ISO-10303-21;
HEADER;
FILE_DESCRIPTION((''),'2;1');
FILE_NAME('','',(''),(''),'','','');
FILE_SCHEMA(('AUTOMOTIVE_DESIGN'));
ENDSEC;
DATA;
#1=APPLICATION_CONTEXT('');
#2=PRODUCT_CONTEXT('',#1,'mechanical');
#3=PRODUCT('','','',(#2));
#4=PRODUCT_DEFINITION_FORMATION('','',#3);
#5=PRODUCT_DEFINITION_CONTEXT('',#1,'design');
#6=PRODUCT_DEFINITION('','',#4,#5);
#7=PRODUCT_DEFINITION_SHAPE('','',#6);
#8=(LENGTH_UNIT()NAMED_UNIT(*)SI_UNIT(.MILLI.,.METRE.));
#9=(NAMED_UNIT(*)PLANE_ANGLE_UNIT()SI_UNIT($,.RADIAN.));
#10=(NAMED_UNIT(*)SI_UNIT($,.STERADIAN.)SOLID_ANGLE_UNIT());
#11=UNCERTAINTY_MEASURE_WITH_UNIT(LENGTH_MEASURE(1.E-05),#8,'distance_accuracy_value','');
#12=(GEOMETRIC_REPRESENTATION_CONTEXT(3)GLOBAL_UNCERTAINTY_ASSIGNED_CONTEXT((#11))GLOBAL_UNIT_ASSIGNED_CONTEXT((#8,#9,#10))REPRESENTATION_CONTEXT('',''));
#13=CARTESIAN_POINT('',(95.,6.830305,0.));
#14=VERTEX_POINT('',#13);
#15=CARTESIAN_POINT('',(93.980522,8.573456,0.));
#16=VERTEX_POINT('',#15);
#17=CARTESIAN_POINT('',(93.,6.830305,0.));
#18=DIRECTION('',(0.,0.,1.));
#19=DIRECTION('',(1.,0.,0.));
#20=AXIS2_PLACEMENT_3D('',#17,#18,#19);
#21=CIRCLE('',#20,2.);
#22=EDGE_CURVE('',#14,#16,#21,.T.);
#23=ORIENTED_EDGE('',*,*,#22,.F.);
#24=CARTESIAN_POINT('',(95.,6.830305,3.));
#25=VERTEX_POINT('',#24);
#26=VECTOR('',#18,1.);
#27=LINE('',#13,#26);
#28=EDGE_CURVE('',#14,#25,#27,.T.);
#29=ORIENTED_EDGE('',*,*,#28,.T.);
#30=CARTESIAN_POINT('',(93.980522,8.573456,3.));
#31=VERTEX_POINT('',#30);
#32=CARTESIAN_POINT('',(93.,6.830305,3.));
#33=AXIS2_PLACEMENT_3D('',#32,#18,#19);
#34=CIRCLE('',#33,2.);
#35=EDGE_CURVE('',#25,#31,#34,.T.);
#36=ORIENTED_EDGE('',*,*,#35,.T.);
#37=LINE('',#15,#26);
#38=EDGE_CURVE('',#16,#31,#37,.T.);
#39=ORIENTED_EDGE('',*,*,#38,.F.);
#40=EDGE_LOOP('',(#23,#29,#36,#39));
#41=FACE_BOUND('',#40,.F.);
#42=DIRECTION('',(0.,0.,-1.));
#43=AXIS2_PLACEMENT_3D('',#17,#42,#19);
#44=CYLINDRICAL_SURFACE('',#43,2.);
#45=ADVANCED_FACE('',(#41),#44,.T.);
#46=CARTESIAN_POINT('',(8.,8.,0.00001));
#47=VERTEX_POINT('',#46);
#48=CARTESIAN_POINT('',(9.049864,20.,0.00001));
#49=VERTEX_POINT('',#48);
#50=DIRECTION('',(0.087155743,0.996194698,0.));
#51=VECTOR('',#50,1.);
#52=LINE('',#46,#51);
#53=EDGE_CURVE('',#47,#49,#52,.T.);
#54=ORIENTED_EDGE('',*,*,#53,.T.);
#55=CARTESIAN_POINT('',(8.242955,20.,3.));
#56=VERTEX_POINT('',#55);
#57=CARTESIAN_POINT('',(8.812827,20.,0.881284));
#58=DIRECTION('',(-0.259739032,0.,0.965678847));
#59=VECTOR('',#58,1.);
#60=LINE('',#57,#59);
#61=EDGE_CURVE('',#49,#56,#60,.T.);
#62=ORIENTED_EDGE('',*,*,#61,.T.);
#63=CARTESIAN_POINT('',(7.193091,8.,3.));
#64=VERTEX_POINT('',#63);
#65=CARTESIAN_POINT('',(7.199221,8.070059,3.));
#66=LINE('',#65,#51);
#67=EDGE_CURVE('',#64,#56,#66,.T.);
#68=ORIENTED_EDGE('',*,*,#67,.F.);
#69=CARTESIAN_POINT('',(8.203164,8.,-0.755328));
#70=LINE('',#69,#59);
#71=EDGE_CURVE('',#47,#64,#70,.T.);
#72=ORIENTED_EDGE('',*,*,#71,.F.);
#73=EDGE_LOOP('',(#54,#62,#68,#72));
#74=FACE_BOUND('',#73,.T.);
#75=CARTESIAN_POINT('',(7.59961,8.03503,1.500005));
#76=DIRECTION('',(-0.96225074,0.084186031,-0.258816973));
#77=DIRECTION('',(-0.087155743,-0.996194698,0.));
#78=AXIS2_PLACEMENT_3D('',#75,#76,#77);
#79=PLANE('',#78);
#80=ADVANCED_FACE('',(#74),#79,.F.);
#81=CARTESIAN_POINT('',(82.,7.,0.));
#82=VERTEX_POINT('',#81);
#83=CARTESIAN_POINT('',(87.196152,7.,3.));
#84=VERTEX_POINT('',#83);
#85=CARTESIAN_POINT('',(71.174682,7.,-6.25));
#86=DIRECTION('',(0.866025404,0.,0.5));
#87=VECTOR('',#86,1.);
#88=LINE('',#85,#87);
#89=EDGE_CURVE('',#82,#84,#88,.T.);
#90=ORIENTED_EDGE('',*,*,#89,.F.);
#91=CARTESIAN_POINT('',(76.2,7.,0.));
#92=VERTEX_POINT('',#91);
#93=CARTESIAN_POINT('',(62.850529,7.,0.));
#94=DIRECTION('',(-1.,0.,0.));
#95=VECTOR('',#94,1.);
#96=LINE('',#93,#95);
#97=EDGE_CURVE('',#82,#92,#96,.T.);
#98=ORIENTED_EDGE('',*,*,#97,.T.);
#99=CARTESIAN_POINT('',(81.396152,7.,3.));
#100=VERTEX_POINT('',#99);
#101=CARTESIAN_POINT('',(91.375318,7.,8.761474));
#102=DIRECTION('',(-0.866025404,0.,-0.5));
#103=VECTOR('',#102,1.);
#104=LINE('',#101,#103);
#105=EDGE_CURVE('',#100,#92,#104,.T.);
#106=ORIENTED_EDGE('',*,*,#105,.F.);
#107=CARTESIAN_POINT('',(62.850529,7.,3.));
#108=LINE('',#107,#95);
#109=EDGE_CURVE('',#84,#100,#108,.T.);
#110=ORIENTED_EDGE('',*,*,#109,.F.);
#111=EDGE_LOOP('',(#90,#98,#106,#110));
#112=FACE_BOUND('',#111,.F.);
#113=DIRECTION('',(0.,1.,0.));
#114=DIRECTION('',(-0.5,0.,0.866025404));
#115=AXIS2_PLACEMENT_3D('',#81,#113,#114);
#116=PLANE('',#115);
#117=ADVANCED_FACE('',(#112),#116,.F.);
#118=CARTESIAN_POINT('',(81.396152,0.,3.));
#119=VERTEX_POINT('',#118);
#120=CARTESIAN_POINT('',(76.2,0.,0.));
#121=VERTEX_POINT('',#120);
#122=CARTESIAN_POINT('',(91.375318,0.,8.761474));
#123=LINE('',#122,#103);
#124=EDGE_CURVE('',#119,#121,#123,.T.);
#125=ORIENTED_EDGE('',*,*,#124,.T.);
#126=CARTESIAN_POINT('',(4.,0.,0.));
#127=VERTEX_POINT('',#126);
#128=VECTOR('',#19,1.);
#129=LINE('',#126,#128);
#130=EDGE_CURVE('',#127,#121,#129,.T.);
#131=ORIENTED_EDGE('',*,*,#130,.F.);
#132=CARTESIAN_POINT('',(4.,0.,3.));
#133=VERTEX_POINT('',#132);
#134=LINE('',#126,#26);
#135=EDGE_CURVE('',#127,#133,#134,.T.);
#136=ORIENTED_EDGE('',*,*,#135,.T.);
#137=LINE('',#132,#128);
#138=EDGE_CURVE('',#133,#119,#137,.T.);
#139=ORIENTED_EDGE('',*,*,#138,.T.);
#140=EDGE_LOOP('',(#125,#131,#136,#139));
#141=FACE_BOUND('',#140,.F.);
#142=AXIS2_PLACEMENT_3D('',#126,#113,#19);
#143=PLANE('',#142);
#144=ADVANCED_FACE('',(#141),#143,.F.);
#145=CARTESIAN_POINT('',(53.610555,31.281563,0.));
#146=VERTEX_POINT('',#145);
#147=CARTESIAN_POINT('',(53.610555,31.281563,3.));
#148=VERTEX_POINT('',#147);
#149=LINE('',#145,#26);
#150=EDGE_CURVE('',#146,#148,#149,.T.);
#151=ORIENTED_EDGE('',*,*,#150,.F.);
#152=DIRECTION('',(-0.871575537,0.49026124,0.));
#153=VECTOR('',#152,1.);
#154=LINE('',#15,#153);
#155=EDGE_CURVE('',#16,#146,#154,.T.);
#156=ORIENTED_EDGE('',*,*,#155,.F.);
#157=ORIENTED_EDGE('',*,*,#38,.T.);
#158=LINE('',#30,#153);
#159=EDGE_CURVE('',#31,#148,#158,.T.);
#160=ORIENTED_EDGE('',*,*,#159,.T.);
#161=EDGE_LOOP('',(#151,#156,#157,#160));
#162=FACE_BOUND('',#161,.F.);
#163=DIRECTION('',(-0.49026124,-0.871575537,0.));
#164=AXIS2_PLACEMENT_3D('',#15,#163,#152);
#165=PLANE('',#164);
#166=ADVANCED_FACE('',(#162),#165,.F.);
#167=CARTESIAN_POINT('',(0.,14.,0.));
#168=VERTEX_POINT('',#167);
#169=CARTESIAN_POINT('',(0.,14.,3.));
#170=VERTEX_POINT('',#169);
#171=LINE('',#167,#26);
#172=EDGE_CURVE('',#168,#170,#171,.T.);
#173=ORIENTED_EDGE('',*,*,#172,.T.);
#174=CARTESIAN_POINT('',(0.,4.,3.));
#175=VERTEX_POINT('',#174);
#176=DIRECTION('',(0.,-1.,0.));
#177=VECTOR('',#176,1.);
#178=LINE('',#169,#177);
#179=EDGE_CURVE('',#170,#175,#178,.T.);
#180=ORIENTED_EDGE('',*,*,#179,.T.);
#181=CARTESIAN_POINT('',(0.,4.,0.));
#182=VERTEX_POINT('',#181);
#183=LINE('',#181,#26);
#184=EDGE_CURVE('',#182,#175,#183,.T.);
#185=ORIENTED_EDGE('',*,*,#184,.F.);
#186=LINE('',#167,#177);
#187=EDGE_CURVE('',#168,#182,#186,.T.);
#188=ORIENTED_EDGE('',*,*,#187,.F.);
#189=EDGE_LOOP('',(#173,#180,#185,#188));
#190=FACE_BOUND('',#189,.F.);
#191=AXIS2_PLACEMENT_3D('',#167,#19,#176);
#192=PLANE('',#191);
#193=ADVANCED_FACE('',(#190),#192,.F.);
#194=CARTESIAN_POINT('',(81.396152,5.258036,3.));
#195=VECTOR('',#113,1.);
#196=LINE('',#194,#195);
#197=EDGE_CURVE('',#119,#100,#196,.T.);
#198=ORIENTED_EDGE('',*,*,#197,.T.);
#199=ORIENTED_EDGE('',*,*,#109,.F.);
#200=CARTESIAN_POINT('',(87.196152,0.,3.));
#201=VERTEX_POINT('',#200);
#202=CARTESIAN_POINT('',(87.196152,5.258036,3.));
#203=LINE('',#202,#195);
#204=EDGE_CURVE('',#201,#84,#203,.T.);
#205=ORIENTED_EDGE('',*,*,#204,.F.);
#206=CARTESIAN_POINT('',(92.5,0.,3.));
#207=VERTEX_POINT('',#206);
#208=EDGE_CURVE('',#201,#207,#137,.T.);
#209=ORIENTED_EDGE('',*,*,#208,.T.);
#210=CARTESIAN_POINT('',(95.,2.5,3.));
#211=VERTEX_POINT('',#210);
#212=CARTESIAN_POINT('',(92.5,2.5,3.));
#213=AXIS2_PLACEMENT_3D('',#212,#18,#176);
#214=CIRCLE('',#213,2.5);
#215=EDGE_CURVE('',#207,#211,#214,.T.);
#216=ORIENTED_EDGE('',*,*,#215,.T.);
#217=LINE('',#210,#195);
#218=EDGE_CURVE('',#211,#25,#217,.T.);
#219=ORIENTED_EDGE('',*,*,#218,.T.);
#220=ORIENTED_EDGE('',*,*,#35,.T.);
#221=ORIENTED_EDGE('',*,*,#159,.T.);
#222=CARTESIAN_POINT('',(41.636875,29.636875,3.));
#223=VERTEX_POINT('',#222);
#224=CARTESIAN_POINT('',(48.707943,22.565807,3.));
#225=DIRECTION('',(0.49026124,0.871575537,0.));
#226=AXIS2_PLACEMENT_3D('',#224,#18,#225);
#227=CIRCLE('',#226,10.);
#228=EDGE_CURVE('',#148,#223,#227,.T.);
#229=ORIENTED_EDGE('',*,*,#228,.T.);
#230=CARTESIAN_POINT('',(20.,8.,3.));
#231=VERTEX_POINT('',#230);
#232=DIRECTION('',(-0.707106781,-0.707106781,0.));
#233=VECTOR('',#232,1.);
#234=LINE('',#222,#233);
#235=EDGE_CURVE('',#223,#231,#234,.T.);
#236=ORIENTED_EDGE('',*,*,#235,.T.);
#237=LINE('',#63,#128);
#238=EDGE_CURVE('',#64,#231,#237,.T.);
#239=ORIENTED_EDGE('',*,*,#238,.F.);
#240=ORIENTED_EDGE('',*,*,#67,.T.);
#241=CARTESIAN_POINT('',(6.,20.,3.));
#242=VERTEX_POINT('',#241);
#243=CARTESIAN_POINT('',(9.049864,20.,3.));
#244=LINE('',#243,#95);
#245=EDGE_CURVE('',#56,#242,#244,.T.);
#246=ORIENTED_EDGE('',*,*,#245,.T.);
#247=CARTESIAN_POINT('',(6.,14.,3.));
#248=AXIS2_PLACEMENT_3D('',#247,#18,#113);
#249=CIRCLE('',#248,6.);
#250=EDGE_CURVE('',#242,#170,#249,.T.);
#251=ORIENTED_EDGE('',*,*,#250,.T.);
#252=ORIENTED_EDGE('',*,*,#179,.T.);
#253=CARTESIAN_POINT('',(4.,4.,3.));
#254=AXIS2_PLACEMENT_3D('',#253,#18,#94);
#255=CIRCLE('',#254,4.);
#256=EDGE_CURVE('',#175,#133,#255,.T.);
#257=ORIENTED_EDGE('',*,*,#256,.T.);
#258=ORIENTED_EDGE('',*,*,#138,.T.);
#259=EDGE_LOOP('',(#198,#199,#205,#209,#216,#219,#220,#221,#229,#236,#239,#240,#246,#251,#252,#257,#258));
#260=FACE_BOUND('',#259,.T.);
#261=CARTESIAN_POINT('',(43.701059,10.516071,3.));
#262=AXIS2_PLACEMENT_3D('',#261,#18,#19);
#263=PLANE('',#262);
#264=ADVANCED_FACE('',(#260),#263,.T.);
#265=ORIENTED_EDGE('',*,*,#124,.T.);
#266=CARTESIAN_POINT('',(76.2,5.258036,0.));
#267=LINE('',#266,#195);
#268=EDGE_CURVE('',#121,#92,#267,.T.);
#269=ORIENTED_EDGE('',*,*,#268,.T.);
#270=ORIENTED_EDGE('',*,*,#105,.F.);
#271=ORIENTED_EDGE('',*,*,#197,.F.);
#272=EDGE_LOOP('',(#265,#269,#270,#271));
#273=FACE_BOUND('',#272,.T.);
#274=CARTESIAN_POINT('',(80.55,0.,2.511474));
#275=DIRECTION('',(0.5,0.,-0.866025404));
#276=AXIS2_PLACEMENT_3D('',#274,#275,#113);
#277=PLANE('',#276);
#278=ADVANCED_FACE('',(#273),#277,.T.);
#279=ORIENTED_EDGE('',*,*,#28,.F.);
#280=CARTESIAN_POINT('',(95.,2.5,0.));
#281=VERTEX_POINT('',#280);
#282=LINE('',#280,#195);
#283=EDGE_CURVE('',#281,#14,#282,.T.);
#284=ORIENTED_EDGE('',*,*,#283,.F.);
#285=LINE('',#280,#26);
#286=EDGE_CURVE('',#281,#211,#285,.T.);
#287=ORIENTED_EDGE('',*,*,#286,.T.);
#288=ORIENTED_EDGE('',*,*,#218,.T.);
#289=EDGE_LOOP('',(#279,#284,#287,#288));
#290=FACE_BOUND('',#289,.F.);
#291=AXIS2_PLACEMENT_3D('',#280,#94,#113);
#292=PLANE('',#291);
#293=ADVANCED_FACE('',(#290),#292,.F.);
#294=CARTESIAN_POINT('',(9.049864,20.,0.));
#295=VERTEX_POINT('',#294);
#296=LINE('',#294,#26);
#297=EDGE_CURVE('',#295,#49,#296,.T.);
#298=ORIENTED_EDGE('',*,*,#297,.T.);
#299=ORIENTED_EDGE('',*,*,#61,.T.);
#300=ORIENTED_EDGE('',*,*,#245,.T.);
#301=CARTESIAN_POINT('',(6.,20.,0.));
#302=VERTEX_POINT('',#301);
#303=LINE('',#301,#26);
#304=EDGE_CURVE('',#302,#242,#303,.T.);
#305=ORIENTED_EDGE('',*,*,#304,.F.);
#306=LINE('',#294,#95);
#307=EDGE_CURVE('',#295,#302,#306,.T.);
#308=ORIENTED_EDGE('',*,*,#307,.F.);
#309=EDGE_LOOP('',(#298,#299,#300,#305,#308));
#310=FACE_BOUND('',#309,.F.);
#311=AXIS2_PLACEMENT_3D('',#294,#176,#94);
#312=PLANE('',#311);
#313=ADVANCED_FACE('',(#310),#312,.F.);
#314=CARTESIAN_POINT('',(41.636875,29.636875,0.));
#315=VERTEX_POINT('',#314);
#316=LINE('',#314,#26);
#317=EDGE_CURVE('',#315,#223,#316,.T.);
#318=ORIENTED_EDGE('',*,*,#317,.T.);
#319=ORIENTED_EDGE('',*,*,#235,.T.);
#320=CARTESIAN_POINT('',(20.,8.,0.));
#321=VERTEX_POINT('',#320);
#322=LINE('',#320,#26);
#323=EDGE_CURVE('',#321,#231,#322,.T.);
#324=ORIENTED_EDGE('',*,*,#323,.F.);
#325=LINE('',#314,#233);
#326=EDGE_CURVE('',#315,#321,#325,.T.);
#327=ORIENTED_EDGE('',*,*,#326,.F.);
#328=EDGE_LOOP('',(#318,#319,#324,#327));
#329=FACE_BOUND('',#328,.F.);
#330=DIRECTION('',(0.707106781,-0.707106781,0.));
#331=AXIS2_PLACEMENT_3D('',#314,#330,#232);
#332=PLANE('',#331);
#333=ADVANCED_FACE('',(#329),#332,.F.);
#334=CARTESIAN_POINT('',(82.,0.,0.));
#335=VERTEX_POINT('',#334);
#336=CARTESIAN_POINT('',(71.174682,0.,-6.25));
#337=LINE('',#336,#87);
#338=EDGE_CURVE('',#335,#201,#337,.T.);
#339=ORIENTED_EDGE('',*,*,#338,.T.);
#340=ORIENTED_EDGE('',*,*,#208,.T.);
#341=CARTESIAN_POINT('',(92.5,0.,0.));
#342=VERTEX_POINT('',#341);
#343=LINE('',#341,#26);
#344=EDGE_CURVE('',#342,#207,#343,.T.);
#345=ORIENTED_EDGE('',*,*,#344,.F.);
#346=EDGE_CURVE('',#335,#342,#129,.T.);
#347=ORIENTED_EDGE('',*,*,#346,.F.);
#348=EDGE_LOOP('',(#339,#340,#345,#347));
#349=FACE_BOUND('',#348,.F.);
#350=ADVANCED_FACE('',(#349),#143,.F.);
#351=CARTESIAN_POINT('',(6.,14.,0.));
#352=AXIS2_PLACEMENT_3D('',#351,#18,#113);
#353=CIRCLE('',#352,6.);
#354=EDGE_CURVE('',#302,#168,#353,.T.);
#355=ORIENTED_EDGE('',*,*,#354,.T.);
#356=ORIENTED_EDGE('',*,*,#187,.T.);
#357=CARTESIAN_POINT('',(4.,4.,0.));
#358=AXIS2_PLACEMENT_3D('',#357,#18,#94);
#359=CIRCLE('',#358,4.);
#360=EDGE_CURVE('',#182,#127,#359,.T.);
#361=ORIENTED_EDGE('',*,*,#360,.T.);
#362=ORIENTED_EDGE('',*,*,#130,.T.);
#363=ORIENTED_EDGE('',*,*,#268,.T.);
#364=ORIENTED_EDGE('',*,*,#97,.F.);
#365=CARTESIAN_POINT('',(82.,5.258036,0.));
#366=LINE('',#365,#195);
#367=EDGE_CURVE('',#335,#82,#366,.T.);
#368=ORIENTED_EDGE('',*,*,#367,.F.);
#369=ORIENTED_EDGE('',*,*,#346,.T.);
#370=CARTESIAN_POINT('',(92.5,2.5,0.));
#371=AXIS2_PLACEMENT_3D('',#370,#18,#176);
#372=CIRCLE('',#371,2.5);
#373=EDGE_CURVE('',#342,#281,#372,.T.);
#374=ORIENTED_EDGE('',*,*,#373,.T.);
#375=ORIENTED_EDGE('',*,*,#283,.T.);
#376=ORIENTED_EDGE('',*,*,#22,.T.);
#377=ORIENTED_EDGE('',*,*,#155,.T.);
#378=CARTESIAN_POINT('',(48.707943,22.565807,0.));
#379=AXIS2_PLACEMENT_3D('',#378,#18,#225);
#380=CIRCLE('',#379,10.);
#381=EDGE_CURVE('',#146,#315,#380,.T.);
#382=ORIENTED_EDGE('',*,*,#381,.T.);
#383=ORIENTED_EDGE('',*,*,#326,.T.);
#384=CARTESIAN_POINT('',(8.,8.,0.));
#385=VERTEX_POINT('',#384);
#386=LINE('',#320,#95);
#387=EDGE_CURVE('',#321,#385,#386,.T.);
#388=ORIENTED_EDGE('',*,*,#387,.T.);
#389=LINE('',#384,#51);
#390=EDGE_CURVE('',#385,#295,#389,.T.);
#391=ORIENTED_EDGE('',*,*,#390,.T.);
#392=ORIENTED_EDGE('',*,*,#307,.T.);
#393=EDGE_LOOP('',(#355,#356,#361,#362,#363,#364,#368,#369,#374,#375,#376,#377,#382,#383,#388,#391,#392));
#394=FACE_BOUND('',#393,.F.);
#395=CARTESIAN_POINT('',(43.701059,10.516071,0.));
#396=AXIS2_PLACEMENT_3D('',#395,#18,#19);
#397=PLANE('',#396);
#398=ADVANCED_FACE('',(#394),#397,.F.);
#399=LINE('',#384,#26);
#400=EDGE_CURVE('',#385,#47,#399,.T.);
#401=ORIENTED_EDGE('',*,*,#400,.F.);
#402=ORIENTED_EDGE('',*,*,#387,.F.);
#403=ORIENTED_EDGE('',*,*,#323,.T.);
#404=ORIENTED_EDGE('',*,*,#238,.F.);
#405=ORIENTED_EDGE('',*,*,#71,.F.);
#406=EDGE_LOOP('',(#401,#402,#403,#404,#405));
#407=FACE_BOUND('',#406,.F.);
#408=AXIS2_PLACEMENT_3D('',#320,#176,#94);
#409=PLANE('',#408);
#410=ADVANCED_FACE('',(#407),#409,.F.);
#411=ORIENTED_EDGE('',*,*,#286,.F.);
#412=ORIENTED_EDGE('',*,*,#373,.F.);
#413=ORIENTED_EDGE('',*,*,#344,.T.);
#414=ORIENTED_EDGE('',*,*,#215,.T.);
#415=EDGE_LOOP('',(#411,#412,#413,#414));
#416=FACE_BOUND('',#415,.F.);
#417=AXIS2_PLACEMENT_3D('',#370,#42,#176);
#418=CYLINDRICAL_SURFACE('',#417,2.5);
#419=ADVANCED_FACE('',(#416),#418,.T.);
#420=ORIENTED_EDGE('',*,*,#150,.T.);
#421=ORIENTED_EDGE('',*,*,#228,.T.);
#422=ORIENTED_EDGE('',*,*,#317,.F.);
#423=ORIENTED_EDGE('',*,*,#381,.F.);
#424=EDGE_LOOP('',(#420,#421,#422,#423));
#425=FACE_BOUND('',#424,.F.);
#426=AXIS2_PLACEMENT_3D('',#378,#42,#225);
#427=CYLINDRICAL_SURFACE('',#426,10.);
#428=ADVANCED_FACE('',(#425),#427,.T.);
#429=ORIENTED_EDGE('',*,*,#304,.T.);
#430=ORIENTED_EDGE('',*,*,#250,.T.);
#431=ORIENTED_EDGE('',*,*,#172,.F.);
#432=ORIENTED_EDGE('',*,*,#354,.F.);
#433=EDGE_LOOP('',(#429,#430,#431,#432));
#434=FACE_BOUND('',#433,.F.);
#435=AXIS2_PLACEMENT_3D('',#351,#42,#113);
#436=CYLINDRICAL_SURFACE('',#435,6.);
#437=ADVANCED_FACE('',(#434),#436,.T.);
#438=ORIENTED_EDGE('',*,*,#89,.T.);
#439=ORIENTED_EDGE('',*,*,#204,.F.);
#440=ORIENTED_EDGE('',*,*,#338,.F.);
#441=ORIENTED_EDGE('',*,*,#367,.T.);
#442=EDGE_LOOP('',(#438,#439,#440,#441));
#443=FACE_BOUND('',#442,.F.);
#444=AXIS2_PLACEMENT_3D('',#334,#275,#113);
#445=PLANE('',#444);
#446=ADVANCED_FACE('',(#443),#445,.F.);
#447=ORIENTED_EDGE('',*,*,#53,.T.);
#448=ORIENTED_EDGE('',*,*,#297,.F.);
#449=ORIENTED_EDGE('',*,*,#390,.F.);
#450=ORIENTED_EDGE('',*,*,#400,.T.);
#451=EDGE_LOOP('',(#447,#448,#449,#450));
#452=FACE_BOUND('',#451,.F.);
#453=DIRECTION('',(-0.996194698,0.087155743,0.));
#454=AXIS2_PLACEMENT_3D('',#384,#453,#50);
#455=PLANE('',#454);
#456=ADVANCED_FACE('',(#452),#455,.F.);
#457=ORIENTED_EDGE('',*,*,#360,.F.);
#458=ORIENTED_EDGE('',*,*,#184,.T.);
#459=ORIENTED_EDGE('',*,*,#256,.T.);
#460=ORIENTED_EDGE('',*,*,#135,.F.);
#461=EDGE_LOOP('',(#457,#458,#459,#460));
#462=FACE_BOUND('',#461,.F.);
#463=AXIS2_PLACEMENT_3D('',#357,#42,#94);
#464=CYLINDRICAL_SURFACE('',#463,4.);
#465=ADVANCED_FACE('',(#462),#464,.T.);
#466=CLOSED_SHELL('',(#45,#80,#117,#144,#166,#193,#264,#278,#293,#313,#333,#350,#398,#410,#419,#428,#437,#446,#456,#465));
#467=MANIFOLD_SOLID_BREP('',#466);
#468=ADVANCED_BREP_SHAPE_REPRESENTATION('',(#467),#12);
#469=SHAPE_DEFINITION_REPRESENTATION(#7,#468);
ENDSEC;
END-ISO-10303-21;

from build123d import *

# Parameters (mm, degrees)
F1_DEPTH = 3
F5_SIZE2 = 0.803838
F5_SIZE  = 2.99999
F4_W     = 7
F4_H     = 2.9
F6_DEPTH = 12.5


# Not quite as in the source:
# - a fillet or chamfer is up to 0.001 mm smaller than in the source, because OpenCascade refuses the exact size


with BuildPart() as f1:
    # F0 (on Top) → F1 (new body)
    with BuildSketch(Plane.XY):
        with BuildLine():
            Line((4, 0), (92.5, 0))
            ThreePointArc((92.5, 0), (94.267766953, 0.732233047), (95, 2.5))
            Line((95, 2.5), (95, 6.8303050312))
            ThreePointArc((95, 6.8303050312), (94.7264189756, 7.8399968261), (93.9805224793, 8.5734561054))
            Line((93.9805224793, 8.5734561054), (53.6105552952, 31.2815626464))
            ThreePointArc((53.6105552952, 31.2815626464), (47.3471346779, 32.4727846642), (41.636875087, 29.636875087))
            Line((41.636875087, 29.636875087), (20, 8))
            Line((20, 8), (8, 8))
            Line((8, 8), (9.0498639623, 20))
            Line((9.0498639623, 20), (6, 20))
            ThreePointArc((6, 20), (1.7573593129, 18.2426406871), (0, 14))
            Line((0, 14), (0, 4))
            ThreePointArc((0, 4), (1.1715728753, 1.1715728753), (4, 0))
        make_face()
    extrude(amount=F1_DEPTH)

    # F5 (size 3 and 0.8038475773 in the source; OpenCascade refuses exactly that, so slightly less here)
    f5_edges = [f1.edges().sort_by_distance(p)[0] for p in [
        (8.524932, 14, 3),
    ]]
    f5_side = f1.faces().sort_by_distance((8.524932, 14, 1.5))[0]
    chamfer(f5_edges, length=F5_SIZE, length2=F5_SIZE2, reference=f5_side)

    # F4 (on line) → F6 (cut, symmetric)
    with BuildSketch(Plane(origin=(61.5, 0, 35.5070415552), x_dir=(0, 1, 0), z_dir=(0.8660254038, 0, 0.5))):
        with Locations((3.5, -39.55)):
            Rectangle(F4_W, F4_H)
    extrude(amount=F6_DEPTH, both=True, mode=Mode.SUBTRACT)


solid = f1.part
